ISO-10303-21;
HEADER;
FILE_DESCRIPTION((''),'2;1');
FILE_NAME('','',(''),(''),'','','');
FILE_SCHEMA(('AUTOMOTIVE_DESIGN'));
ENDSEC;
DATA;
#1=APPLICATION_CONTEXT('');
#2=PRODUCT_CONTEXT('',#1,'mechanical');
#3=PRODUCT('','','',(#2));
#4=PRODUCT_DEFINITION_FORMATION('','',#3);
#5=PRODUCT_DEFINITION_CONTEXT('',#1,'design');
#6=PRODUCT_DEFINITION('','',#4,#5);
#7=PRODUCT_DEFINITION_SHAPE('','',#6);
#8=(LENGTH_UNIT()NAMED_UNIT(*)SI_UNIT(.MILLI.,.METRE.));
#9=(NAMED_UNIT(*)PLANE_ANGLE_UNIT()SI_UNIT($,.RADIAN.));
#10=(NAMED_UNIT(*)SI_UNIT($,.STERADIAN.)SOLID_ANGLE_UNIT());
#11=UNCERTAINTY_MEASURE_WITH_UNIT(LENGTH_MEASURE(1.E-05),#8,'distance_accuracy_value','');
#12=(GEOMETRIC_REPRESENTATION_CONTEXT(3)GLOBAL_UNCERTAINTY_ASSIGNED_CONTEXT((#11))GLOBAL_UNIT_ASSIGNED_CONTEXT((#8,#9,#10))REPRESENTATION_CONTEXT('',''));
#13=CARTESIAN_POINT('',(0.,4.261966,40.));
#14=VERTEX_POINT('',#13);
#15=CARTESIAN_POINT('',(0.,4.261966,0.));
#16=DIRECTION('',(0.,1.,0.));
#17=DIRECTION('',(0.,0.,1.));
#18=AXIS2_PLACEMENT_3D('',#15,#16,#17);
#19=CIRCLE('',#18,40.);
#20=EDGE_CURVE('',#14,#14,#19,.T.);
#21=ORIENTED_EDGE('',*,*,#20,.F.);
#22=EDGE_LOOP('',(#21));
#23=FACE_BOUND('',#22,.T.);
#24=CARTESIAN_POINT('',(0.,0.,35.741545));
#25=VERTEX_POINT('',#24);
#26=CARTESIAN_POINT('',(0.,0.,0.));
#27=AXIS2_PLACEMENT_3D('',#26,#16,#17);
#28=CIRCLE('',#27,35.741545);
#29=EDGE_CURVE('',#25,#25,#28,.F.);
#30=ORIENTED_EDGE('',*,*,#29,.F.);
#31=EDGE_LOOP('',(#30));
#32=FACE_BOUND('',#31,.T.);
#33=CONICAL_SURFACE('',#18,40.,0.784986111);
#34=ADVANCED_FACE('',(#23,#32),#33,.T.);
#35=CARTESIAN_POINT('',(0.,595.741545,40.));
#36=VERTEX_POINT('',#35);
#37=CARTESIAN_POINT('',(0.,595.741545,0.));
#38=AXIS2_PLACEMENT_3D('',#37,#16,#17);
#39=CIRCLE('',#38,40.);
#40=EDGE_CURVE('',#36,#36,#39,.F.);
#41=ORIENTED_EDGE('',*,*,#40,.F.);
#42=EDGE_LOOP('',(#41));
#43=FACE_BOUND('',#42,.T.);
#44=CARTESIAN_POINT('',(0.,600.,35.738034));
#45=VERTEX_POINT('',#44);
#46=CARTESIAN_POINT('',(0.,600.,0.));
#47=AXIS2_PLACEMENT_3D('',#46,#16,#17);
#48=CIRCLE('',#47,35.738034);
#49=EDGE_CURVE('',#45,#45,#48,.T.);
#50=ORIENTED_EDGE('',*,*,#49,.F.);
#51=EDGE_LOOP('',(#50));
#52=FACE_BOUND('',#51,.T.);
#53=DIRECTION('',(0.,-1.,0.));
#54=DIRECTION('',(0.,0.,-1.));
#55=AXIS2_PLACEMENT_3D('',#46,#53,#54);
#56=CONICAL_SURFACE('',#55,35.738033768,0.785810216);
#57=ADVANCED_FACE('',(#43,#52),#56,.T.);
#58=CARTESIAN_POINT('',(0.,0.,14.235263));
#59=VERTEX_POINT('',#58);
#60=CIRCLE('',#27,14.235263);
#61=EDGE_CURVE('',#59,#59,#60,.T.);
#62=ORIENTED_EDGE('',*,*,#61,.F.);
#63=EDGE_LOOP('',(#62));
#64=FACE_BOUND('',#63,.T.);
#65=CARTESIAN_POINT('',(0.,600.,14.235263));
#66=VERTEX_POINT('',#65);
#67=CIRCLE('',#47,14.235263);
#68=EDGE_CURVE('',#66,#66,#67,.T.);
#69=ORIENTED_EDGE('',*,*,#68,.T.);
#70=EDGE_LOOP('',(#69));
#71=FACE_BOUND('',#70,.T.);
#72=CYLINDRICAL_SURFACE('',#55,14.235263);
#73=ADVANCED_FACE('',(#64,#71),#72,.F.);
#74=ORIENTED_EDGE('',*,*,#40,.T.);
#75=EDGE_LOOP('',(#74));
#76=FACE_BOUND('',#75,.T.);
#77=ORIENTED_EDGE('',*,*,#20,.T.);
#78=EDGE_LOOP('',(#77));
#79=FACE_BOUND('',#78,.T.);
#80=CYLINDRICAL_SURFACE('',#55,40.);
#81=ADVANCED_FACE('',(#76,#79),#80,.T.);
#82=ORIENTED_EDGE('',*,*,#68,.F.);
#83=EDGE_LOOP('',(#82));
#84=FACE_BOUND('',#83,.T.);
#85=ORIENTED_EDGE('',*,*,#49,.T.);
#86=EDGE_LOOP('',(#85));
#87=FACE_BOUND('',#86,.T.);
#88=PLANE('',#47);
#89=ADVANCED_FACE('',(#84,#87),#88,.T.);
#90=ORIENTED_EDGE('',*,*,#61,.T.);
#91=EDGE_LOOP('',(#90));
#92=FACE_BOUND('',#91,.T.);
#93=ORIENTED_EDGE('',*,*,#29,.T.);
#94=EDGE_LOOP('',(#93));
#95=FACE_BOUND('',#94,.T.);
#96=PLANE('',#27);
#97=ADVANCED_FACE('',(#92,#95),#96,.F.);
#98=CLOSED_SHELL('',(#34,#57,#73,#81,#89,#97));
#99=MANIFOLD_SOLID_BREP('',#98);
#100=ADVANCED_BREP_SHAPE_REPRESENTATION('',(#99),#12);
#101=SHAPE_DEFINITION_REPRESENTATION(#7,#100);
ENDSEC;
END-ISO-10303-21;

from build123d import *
from OCP.BRepFilletAPI import BRepFilletAPI_MakeChamfer

# Parameters (mm, degrees)
SKETCH1_R           = 40
BOSS_EXTRUDE1_DEPTH = 600
SKETCH2_R           = 14.235263406
CUT_EXTRUDE1_DEPTH  = 603.660766933
CHAMFER1_SIZE       = 4.258455373
CHAMFER1_SIZE2      = 4.261966232


with BuildPart() as part:
    # Sketch1 → Boss-Extrude1 (new body)
    with BuildSketch(Plane(origin=(0, 0, 0), x_dir=(1, 0, 0), z_dir=(0, 1, 0))):
        Circle(SKETCH1_R)
    extrude(amount=BOSS_EXTRUDE1_DEPTH)

    # Sketch2 → Cut-Extrude1 (cut, through all)
    with BuildSketch(Plane(origin=(0, 0, 0), x_dir=(1, 0, 0), z_dir=(0, 1, 0))):
        Circle(SKETCH2_R)
    extrude(amount=CUT_EXTRUDE1_DEPTH, mode=Mode.SUBTRACT)

    # Chamfer1: one chamfer whose edges measure the first distance from different faces: ONE call of the kernel's chamfer builder (chamfer() names one face for all edges)
    chamfer1_edges_1 = [part.edges().sort_by_distance(p)[0] for p in [
        (-40, 600, 0),
    ]]
    chamfer1_side_1 = [part.faces().sort_by_distance(p)[0] for p in [
        (-40, 300, 0),
    ]]
    chamfer1_edges_2 = [part.edges().sort_by_distance(p)[0] for p in [
        (-40, 0, 0),
    ]]
    chamfer1_side_2 = [part.faces().sort_by_distance(p)[0] for p in [
        (-38.86862915, 0, 0),
    ]]
    chamfer1 = BRepFilletAPI_MakeChamfer(part.part.solid().wrapped)
    for e in chamfer1_edges_1:
        chamfer1.Add(CHAMFER1_SIZE, CHAMFER1_SIZE2, e.wrapped, chamfer1_side_1[0].wrapped)  # the first distance lies on this face
    for e in chamfer1_edges_2:
        chamfer1.Add(CHAMFER1_SIZE, CHAMFER1_SIZE2, e.wrapped, chamfer1_side_2[0].wrapped)  # the first distance lies on this face
    add(Compound.cast(chamfer1.Shape()), mode=Mode.REPLACE)


solid = part.part
